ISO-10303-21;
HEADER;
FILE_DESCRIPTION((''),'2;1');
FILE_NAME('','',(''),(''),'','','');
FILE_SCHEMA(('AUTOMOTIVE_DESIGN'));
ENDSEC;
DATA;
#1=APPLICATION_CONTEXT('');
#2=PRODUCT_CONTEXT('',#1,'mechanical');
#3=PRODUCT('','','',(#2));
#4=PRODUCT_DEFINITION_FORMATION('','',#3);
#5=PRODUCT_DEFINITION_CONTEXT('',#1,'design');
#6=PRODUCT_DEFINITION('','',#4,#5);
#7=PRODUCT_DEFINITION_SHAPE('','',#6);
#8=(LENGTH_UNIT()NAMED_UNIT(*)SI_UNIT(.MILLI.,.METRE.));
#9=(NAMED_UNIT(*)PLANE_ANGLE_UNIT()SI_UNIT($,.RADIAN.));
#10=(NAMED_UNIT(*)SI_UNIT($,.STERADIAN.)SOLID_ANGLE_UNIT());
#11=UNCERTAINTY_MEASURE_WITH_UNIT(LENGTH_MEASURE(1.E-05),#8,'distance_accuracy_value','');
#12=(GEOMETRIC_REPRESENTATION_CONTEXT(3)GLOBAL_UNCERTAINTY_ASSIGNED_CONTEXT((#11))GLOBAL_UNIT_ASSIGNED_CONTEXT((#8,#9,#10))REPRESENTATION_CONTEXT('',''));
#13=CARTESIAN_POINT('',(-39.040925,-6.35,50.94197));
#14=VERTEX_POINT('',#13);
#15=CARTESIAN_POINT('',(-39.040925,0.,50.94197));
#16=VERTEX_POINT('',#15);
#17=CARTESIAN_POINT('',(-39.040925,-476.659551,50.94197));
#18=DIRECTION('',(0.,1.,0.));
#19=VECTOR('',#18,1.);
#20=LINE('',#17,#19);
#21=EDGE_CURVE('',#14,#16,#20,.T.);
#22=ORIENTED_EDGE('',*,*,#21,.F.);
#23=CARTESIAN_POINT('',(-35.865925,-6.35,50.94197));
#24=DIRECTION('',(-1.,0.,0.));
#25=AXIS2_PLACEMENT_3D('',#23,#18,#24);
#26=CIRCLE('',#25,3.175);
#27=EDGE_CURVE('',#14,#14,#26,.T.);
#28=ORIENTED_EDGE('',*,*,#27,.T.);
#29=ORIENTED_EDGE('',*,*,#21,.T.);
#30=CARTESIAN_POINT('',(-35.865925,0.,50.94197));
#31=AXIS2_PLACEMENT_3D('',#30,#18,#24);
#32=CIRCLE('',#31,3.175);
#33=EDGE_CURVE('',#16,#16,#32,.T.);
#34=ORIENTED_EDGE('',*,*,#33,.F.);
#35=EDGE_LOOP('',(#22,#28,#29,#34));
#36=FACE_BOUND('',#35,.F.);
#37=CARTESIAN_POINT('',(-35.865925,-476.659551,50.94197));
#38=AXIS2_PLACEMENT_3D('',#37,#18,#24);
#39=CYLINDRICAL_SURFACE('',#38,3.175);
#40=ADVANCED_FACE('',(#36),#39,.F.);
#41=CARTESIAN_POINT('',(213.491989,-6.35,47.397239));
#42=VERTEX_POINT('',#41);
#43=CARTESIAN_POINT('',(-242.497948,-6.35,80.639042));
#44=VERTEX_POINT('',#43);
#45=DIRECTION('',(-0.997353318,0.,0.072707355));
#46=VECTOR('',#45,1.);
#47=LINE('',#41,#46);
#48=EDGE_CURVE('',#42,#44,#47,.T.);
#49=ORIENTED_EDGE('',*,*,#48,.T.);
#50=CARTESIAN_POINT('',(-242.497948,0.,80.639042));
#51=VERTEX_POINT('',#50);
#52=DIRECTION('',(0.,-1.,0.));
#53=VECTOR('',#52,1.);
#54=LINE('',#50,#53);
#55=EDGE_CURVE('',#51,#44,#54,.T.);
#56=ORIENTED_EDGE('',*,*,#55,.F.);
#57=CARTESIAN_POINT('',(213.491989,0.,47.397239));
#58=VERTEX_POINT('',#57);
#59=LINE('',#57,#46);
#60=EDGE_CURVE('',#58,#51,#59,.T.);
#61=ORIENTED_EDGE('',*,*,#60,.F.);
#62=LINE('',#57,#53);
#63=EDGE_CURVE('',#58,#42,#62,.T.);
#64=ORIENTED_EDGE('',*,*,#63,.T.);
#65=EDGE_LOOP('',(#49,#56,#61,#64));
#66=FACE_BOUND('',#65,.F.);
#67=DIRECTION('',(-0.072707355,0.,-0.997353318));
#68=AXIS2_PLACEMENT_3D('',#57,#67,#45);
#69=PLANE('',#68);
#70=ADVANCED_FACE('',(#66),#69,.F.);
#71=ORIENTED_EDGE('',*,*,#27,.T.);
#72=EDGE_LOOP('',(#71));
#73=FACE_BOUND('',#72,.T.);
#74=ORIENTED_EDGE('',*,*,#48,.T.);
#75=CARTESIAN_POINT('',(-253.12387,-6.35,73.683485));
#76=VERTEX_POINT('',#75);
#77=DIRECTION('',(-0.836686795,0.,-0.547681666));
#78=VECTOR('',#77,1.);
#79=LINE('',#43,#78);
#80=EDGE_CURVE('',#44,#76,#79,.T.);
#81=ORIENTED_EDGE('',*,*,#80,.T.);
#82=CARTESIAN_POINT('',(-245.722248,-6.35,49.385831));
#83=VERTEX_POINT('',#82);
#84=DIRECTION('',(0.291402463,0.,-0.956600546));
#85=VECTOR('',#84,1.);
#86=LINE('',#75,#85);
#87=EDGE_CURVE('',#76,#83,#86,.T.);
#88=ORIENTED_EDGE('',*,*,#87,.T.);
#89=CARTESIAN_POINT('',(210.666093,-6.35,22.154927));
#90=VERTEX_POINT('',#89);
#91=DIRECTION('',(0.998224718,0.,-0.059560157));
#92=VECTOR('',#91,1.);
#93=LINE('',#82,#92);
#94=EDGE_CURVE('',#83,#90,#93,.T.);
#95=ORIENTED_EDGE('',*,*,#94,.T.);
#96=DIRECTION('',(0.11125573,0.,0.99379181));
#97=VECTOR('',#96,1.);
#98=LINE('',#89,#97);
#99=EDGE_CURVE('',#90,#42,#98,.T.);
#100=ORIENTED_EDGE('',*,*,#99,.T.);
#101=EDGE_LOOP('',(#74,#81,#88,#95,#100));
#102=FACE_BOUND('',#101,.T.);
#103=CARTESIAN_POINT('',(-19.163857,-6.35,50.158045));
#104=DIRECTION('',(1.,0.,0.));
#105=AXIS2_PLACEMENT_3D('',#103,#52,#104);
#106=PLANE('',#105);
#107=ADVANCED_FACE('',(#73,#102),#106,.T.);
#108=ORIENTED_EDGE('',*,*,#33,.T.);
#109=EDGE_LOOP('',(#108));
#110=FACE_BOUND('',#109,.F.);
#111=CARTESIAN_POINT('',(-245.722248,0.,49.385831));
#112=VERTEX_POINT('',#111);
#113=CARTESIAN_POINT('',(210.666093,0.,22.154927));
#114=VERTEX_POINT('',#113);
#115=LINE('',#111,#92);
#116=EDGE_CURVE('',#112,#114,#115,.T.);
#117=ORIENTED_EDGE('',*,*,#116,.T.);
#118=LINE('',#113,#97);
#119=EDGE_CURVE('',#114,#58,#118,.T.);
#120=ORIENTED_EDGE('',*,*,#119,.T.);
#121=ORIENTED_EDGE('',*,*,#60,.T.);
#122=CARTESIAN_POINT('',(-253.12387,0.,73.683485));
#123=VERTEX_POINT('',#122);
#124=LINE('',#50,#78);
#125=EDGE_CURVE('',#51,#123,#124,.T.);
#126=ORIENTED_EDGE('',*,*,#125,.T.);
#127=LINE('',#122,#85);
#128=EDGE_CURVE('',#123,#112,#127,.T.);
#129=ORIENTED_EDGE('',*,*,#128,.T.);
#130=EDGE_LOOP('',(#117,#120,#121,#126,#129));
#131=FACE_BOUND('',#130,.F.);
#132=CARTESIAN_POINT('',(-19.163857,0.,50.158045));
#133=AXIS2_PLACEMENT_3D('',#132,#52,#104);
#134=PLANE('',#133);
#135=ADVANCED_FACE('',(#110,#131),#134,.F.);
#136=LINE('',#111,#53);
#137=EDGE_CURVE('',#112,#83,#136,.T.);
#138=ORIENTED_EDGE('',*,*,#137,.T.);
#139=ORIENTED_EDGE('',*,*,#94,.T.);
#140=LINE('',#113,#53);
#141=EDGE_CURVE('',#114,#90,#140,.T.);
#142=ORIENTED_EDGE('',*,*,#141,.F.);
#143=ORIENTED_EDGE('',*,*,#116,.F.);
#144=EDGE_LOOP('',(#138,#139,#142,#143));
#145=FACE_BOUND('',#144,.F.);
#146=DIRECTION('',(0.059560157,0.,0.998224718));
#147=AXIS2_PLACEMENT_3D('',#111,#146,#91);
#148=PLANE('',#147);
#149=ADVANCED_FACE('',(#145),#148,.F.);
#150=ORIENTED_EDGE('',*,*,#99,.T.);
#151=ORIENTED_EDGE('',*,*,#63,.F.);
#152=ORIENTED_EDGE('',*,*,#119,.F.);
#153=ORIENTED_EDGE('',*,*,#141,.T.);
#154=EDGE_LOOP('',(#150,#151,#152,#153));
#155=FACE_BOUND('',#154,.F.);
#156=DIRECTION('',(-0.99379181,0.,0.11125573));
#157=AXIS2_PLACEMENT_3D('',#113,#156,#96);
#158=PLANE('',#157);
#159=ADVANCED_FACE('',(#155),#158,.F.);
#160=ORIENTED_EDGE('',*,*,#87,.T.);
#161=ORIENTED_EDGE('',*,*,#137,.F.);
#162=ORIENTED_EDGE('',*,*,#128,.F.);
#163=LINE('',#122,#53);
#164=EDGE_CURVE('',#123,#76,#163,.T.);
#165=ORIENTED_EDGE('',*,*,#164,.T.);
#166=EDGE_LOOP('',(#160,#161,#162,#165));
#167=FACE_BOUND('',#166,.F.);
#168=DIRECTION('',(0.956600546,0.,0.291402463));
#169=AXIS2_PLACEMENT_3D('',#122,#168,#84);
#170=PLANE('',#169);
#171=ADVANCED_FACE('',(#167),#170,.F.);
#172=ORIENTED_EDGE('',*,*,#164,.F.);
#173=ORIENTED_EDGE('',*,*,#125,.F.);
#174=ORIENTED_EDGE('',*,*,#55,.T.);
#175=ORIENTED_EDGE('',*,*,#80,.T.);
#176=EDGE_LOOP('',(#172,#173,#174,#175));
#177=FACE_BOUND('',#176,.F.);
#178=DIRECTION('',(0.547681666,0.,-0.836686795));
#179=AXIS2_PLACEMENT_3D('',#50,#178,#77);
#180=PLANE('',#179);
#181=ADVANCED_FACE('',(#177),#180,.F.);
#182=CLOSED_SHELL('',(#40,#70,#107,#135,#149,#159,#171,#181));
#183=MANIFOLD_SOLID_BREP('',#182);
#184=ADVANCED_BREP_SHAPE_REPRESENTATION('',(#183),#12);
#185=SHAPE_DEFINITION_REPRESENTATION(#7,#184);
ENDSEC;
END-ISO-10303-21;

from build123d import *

# Parameters (mm, degrees)
F1_DEPTH = 6.35
F3_D     = 6.35


# Not quite as in the source:
# - a length typed as a fraction of an inch, garbled in the dataset ("3 / 203.2 mm" for 3/8 in), is restored


with BuildPart() as f1:
    # F0 (on Front) → F1 (new body)
    with BuildSketch(Plane.XZ):
        Polygon((-242.4979480523, 80.6390420482), (-253.1238703477, 73.6834848906), (-245.7222477886, 49.3858310226), (210.6660933021, 22.1549273185), (213.4919888436, 47.3972393043), align=None)
    extrude(amount=F1_DEPTH)

    # F3 (through all)
    with Locations(Plane.XZ.offset(6.35)):
        with Locations((-35.8659252524, 50.9419701993)):
            Hole(F3_D / 2)


solid = f1.part
